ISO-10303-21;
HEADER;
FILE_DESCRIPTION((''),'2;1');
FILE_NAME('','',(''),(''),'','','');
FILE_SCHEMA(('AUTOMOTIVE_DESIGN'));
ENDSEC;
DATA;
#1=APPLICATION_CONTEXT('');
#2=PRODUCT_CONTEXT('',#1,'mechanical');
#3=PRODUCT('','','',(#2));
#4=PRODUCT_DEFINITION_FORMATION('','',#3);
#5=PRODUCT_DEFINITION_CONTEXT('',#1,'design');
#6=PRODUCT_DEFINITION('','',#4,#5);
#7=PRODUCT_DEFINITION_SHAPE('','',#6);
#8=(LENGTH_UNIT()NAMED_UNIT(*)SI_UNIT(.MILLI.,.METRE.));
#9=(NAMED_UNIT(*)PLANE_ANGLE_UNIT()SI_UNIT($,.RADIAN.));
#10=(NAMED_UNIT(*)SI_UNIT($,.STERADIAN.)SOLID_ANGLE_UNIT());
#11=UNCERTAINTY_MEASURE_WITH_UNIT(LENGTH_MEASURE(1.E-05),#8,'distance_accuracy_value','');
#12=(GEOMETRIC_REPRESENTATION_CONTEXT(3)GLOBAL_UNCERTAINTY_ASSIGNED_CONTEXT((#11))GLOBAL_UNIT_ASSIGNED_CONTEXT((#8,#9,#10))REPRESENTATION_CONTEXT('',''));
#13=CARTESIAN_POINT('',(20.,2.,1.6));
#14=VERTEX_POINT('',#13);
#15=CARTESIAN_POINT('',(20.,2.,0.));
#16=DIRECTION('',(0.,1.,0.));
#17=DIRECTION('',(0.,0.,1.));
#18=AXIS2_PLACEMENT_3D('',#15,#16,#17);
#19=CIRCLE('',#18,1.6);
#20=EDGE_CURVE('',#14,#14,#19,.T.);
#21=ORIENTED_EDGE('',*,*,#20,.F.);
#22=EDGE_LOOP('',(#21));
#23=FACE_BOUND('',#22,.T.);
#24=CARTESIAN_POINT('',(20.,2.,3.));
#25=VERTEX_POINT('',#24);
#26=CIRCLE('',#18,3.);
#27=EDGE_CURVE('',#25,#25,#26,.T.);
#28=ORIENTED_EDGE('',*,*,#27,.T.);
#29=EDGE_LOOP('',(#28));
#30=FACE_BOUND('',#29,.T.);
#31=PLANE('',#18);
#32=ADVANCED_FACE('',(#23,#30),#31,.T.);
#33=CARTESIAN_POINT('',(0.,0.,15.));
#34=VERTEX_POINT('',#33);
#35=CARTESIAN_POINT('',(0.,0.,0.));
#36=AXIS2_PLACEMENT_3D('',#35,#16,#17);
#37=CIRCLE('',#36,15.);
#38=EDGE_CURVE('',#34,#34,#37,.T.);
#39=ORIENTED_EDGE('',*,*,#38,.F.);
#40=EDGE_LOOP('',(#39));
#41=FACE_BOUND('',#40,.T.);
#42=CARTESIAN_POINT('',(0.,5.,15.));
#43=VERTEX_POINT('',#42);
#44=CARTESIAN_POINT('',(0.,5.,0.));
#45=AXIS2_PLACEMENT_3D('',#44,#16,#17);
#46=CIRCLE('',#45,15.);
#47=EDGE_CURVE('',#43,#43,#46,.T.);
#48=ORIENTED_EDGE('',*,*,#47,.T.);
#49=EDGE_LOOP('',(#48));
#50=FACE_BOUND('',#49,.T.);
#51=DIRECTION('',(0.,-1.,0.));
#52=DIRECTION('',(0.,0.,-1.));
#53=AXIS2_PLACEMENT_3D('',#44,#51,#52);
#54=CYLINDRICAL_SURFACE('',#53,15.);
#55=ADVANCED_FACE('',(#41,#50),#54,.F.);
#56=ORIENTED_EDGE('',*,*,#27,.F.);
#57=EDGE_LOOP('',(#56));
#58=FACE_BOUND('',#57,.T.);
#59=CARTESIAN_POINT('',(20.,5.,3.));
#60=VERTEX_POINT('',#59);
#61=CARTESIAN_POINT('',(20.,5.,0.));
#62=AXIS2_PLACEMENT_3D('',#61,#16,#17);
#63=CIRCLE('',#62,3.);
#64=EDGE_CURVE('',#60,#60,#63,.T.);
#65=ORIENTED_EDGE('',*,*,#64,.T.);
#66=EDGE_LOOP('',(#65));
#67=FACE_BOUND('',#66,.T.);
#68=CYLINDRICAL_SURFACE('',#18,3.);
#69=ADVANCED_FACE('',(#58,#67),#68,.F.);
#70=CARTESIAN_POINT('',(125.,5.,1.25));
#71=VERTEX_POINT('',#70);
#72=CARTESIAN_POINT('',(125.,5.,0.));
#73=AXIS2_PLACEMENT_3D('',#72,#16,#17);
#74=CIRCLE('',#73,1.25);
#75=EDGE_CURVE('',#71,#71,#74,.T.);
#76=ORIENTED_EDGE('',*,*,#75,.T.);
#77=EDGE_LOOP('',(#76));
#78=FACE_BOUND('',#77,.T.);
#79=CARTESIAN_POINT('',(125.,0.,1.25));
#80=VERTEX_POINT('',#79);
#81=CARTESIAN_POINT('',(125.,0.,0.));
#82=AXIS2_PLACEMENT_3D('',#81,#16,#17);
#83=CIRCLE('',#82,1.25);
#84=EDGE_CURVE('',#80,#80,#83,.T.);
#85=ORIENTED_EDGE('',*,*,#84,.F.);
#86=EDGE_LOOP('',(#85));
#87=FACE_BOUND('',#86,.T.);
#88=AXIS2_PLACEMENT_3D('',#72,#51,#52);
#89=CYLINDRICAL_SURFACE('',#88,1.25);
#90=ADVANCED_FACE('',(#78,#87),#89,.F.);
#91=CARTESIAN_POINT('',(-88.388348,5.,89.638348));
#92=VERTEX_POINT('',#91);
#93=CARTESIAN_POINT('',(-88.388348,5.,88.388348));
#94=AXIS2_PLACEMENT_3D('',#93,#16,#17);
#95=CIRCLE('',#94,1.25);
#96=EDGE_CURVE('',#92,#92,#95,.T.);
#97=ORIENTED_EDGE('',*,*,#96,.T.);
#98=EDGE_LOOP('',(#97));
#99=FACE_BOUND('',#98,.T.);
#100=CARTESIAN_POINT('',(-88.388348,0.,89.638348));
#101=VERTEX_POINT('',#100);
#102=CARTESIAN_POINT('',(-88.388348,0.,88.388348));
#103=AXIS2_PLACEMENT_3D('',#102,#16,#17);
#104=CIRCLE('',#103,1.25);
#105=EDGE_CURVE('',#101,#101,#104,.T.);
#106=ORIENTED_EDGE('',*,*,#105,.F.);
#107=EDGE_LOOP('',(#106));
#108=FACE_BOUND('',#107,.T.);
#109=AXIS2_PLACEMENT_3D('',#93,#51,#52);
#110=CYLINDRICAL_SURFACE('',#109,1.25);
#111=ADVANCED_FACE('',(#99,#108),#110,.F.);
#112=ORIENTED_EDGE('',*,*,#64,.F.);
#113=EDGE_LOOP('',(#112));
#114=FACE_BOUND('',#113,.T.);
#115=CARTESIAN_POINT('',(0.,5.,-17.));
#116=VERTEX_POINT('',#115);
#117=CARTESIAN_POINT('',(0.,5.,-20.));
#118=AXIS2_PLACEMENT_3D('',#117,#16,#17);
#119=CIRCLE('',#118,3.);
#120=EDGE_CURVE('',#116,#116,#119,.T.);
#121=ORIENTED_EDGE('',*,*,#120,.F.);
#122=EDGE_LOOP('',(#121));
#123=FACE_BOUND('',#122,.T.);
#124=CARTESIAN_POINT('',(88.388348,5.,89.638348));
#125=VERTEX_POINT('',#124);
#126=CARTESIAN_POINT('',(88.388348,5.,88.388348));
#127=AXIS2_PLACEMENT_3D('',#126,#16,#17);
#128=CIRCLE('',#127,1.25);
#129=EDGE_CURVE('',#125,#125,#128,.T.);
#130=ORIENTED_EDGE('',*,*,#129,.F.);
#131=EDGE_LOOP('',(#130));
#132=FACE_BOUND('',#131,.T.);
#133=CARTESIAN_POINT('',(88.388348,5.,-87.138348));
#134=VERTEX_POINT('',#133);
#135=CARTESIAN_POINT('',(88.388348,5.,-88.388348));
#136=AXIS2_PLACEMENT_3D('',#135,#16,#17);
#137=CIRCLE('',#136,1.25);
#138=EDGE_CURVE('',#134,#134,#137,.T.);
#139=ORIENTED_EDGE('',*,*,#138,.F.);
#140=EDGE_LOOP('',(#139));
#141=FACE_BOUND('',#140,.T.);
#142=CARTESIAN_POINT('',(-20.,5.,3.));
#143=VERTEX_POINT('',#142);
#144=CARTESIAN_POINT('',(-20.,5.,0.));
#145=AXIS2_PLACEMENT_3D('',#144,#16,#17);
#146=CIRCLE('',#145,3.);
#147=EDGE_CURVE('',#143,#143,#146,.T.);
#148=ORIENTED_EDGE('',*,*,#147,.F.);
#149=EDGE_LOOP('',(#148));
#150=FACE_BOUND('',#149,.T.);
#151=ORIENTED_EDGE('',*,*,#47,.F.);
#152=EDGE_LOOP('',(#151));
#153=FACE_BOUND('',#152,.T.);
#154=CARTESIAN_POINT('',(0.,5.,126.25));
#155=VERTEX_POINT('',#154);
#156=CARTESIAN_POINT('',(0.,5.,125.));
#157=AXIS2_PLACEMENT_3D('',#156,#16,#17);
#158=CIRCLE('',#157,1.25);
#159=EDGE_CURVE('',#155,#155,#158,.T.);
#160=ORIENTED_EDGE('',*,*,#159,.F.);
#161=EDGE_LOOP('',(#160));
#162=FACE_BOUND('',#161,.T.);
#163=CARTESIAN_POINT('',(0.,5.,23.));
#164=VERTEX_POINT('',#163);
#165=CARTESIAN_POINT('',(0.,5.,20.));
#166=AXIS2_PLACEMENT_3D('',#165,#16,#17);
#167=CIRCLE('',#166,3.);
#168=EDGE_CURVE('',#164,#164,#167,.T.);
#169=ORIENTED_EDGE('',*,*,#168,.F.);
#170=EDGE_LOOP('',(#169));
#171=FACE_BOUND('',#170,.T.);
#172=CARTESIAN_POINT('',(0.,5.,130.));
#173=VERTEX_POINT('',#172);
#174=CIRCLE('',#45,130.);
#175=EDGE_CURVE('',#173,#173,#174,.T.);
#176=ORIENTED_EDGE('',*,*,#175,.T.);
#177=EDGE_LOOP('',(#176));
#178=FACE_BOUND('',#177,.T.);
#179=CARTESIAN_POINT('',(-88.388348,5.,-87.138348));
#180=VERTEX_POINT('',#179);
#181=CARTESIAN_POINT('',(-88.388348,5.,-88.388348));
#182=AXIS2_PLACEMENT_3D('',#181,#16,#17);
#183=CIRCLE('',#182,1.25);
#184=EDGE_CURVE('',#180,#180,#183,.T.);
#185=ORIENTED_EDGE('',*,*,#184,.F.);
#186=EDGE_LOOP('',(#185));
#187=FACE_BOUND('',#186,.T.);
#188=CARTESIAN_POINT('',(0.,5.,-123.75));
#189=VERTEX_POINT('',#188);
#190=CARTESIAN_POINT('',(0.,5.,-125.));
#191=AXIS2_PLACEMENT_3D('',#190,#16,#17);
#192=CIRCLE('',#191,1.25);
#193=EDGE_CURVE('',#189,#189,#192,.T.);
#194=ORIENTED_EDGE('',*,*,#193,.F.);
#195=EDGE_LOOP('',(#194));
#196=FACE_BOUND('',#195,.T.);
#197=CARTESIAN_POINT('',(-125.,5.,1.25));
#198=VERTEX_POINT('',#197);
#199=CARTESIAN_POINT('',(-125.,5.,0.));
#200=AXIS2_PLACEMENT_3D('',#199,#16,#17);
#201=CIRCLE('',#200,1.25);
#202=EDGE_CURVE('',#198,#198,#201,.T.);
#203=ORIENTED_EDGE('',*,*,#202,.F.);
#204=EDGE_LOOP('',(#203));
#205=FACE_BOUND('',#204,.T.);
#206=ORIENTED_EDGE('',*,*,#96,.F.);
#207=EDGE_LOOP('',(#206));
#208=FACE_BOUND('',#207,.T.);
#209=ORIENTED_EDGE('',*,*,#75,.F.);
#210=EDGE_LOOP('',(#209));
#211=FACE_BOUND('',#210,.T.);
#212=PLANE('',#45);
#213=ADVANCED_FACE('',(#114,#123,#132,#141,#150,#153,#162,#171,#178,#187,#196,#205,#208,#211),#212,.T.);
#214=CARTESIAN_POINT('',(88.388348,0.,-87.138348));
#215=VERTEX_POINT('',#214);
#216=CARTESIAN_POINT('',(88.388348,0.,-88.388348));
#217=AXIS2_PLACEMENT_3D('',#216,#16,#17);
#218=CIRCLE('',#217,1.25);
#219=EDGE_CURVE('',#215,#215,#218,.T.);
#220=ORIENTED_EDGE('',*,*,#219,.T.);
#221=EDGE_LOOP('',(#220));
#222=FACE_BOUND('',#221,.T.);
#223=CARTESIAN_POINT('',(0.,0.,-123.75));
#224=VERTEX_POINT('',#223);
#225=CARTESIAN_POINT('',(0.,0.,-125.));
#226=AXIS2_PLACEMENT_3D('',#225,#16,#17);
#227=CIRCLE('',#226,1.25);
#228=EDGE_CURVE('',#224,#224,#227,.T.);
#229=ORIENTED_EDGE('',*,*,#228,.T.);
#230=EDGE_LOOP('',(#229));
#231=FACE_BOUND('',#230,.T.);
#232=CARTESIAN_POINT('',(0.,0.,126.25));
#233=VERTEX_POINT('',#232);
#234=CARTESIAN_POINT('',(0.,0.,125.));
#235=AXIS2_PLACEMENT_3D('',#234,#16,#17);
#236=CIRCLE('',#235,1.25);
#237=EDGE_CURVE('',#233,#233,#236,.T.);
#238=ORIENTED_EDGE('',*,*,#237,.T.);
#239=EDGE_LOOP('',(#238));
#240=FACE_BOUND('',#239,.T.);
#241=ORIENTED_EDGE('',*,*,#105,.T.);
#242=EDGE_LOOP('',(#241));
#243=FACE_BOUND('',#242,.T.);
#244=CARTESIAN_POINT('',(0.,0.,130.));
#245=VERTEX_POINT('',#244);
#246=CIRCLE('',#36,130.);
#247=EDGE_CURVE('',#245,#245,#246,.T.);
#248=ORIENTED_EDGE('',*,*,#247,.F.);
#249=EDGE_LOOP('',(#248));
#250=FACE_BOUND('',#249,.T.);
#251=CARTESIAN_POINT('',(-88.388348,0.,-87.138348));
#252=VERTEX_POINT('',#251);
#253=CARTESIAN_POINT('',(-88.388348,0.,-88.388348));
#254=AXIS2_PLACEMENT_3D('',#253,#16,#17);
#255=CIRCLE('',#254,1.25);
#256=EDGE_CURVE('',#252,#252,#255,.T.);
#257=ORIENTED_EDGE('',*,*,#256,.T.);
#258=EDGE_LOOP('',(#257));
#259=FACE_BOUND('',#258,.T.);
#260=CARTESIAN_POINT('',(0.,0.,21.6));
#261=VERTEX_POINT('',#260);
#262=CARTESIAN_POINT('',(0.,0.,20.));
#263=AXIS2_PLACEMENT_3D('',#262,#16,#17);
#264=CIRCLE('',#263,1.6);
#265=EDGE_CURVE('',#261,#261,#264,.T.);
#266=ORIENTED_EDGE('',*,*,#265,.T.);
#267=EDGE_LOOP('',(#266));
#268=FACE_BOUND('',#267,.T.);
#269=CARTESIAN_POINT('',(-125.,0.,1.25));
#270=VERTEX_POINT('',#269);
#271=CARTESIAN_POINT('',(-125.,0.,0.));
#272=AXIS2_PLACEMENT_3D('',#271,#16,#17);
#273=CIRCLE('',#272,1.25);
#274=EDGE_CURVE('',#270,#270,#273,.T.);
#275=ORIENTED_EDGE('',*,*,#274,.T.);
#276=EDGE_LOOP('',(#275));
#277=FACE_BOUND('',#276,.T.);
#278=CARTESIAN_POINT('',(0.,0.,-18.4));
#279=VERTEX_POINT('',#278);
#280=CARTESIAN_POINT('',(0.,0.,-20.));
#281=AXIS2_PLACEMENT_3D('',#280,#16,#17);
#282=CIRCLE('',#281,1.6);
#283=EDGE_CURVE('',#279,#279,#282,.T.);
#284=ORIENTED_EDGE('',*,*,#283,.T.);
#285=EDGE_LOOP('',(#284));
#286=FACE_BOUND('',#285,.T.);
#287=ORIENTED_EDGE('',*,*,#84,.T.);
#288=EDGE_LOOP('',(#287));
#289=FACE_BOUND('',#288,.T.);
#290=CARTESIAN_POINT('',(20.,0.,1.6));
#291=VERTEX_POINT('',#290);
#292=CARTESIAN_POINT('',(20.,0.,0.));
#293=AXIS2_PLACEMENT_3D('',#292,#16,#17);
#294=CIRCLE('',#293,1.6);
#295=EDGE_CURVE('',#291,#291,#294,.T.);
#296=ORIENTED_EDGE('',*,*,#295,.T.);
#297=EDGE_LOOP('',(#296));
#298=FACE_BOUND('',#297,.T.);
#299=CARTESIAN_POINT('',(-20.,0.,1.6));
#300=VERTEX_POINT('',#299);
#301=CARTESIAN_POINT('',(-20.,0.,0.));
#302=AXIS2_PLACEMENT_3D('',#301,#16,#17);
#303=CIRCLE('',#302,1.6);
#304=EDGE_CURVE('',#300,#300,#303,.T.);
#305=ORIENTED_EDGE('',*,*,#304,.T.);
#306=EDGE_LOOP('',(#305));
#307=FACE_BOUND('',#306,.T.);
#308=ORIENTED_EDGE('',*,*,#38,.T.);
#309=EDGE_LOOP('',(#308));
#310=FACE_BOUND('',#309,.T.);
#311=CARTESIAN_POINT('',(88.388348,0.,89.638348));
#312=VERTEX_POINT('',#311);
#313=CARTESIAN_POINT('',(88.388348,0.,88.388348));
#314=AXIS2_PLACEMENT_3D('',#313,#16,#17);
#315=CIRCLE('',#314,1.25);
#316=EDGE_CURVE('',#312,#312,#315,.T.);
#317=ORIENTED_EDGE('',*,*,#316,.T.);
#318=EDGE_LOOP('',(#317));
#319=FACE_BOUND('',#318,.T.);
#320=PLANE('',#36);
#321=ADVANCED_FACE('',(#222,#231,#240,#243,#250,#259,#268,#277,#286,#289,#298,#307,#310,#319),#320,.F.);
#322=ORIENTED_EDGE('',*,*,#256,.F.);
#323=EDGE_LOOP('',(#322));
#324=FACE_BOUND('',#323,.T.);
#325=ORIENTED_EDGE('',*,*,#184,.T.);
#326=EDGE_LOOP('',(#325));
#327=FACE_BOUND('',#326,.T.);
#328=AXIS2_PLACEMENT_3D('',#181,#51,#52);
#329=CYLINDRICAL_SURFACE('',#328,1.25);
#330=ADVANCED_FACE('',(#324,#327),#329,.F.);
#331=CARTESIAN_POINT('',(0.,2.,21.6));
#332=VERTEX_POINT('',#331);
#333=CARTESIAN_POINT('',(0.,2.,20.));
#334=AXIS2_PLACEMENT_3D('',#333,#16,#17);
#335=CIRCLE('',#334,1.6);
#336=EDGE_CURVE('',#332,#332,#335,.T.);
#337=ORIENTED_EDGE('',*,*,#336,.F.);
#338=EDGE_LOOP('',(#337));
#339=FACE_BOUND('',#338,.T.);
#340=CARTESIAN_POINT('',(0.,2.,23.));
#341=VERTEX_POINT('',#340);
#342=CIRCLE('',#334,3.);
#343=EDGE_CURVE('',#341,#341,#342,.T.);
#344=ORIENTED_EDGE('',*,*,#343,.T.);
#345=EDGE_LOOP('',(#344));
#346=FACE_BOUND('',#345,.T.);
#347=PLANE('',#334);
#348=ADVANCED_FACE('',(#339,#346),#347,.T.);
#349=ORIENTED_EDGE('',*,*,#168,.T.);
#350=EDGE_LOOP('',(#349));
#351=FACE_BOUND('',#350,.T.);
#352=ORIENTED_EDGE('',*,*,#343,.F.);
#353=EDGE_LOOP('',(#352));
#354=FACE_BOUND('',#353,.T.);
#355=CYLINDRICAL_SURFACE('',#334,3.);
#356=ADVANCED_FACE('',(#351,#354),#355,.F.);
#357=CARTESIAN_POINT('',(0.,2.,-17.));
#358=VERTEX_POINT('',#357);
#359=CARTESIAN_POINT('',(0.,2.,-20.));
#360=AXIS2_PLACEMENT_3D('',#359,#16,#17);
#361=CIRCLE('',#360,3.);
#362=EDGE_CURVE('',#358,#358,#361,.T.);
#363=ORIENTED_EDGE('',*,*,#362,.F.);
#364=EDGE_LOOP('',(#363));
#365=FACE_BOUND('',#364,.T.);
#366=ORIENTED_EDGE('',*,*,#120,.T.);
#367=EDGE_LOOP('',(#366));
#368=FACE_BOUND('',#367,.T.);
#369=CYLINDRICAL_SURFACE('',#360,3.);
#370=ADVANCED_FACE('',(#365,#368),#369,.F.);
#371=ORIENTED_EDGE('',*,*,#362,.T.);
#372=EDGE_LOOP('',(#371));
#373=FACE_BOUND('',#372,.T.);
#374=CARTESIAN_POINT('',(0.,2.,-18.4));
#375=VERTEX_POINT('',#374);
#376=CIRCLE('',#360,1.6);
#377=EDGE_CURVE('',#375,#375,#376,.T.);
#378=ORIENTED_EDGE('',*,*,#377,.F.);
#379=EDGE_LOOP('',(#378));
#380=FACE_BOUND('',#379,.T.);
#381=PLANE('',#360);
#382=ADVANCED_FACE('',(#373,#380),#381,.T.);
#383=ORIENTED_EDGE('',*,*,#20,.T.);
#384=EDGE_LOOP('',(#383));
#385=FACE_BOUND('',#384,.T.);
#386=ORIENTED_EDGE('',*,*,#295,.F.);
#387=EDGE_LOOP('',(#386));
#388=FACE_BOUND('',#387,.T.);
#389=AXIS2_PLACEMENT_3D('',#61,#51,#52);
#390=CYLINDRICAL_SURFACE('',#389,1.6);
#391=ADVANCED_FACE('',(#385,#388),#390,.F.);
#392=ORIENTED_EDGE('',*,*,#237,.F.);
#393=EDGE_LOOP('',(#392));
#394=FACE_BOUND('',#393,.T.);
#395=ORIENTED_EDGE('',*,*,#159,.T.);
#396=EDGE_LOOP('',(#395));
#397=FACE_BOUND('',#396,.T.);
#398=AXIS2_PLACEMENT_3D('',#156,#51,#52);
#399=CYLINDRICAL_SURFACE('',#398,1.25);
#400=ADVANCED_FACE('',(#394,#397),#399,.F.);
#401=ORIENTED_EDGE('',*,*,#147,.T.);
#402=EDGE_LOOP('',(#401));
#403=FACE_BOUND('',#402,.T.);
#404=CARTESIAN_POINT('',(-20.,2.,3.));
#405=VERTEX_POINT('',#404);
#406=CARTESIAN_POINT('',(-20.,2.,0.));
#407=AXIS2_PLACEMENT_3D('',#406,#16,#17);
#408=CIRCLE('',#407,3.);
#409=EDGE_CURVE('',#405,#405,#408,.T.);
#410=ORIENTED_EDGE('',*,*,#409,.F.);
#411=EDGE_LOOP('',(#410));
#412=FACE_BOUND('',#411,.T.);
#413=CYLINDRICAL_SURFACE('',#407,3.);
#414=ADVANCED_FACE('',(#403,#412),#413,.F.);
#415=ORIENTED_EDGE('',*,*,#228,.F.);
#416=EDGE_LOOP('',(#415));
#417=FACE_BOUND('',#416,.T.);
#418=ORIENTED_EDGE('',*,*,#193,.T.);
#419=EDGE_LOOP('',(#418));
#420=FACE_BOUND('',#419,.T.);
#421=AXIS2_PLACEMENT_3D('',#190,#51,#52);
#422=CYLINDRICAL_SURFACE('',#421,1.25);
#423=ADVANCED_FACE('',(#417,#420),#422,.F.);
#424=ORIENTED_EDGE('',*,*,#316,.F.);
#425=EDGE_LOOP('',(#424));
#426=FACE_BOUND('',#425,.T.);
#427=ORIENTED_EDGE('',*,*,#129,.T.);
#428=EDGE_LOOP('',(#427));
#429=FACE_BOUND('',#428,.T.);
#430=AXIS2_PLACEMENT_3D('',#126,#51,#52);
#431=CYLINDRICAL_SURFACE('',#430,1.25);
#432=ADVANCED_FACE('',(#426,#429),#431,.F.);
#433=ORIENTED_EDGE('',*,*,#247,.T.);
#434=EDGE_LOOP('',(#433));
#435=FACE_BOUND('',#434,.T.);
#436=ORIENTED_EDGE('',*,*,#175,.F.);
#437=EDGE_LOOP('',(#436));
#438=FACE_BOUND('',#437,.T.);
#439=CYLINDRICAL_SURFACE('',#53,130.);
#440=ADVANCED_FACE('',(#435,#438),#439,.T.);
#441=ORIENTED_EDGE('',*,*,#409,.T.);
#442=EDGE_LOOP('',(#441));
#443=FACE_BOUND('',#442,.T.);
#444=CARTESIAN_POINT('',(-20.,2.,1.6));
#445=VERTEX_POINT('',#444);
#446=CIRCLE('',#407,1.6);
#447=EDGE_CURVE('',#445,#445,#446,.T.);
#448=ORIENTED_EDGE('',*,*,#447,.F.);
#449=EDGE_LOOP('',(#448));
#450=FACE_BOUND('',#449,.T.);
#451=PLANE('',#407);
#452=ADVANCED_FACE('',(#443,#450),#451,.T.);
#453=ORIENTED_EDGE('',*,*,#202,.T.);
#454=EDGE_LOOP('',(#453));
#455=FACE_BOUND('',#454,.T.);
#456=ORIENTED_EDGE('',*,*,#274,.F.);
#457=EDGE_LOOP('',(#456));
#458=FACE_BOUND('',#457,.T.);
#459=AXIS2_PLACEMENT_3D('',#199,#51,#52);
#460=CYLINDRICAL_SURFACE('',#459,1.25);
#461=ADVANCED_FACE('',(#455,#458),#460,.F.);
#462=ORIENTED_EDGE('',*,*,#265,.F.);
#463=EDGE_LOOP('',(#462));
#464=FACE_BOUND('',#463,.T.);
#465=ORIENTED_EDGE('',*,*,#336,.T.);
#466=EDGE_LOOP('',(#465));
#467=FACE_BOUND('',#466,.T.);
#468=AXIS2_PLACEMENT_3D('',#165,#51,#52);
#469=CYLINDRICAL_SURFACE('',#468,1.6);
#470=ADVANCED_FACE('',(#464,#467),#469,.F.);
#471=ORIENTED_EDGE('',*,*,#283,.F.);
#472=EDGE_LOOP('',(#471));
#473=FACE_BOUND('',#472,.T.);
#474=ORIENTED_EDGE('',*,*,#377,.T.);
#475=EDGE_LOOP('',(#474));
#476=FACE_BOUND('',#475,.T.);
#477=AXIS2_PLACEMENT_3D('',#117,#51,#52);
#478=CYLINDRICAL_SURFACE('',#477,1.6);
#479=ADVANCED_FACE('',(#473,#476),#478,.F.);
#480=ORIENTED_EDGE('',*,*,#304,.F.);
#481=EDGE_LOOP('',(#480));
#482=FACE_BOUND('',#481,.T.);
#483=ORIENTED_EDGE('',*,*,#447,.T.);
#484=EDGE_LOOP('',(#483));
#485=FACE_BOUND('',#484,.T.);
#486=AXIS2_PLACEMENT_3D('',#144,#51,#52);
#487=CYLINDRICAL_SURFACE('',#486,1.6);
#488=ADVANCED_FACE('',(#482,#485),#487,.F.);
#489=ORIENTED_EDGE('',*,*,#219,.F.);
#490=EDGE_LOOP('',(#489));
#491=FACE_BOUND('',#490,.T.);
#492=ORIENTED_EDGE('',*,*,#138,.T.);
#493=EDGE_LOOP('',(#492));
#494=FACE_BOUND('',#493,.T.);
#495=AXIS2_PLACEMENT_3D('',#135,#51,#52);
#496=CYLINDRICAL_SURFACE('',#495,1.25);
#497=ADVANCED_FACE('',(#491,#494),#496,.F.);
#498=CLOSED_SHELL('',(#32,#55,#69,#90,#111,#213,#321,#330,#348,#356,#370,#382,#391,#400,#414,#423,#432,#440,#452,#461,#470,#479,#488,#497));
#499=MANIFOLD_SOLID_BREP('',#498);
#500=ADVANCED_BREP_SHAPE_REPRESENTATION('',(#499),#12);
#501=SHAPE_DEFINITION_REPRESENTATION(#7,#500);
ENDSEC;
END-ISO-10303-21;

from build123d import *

# Parameters (mm, degrees)
EXTRUDE_1_OUTLINE_R   = 130
EXTRUDE_1_OUTLINE_R_2 = 1.25
EXTRUDE_1_OUTLINE_R_3 = 1.6
EXTRUDE_1_OUTLINE_R_4 = 15
EXTRUDE_1_DEPTH       = 5
SKETCH_2_R            = 3
CUT_EXTRUDE_1_DEPTH   = 3


# Read off the part's stored shape, not the designer's step: ﾎﾞｽ - 押し出し1
with BuildPart() as part:
    # ﾎﾞｽ - 押し出し1 outline → ﾎﾞｽ - 押し出し1 (new body)
    with BuildSketch(Plane(origin=(0, 0, 0), x_dir=(1, 0, 0), z_dir=(0, 1, 0))):
        Circle(EXTRUDE_1_OUTLINE_R)
        with Locations((-88.388347648, -88.388347648)):
            Circle(EXTRUDE_1_OUTLINE_R_2, mode=Mode.SUBTRACT)
        with Locations((0, -125)):
            Circle(EXTRUDE_1_OUTLINE_R_2, mode=Mode.SUBTRACT)
        with Locations((88.388347648, -88.388347648)):
            Circle(EXTRUDE_1_OUTLINE_R_2, mode=Mode.SUBTRACT)
        with Locations((0, -20)):
            Circle(EXTRUDE_1_OUTLINE_R_3, mode=Mode.SUBTRACT)
        with Locations((-125, 0)):
            Circle(EXTRUDE_1_OUTLINE_R_2, mode=Mode.SUBTRACT)
        with Locations((-20, 0)):
            Circle(EXTRUDE_1_OUTLINE_R_3, mode=Mode.SUBTRACT)
        with Locations((-88.388347648, 88.388347648)):
            Circle(EXTRUDE_1_OUTLINE_R_2, mode=Mode.SUBTRACT)
        Circle(EXTRUDE_1_OUTLINE_R_4, mode=Mode.SUBTRACT)
        with Locations((20, 0)):
            Circle(EXTRUDE_1_OUTLINE_R_3, mode=Mode.SUBTRACT)
        with Locations((0, 20)):
            Circle(EXTRUDE_1_OUTLINE_R_3, mode=Mode.SUBTRACT)
        with Locations((125, 0)):
            Circle(EXTRUDE_1_OUTLINE_R_2, mode=Mode.SUBTRACT)
        with Locations((0, 125)):
            Circle(EXTRUDE_1_OUTLINE_R_2, mode=Mode.SUBTRACT)
        with Locations((88.388347648, 88.388347648)):
            Circle(EXTRUDE_1_OUTLINE_R_2, mode=Mode.SUBTRACT)
    extrude(amount=EXTRUDE_1_DEPTH)

    # ｽｹｯﾁ2 → ｶｯﾄ - 押し出し1 (cut)
    with BuildSketch(Plane(origin=(0, 5, 0), x_dir=(1, 0, 0), z_dir=(0, 1, 0))):
        with Locations(Location((0, 20, 0), (0, 0, 270))):
            Circle(SKETCH_2_R)
        with Locations(Location((20, 0, 0), (0, 0, 270))):
            Circle(SKETCH_2_R)
        with Locations(Location((0, -20, 0), (0, 0, 270))):
            Circle(SKETCH_2_R)
        with Locations(Location((-20, 0, 0), (0, 0, 270))):
            Circle(SKETCH_2_R)
    extrude(amount=-CUT_EXTRUDE_1_DEPTH, mode=Mode.SUBTRACT)


solid = part.part
